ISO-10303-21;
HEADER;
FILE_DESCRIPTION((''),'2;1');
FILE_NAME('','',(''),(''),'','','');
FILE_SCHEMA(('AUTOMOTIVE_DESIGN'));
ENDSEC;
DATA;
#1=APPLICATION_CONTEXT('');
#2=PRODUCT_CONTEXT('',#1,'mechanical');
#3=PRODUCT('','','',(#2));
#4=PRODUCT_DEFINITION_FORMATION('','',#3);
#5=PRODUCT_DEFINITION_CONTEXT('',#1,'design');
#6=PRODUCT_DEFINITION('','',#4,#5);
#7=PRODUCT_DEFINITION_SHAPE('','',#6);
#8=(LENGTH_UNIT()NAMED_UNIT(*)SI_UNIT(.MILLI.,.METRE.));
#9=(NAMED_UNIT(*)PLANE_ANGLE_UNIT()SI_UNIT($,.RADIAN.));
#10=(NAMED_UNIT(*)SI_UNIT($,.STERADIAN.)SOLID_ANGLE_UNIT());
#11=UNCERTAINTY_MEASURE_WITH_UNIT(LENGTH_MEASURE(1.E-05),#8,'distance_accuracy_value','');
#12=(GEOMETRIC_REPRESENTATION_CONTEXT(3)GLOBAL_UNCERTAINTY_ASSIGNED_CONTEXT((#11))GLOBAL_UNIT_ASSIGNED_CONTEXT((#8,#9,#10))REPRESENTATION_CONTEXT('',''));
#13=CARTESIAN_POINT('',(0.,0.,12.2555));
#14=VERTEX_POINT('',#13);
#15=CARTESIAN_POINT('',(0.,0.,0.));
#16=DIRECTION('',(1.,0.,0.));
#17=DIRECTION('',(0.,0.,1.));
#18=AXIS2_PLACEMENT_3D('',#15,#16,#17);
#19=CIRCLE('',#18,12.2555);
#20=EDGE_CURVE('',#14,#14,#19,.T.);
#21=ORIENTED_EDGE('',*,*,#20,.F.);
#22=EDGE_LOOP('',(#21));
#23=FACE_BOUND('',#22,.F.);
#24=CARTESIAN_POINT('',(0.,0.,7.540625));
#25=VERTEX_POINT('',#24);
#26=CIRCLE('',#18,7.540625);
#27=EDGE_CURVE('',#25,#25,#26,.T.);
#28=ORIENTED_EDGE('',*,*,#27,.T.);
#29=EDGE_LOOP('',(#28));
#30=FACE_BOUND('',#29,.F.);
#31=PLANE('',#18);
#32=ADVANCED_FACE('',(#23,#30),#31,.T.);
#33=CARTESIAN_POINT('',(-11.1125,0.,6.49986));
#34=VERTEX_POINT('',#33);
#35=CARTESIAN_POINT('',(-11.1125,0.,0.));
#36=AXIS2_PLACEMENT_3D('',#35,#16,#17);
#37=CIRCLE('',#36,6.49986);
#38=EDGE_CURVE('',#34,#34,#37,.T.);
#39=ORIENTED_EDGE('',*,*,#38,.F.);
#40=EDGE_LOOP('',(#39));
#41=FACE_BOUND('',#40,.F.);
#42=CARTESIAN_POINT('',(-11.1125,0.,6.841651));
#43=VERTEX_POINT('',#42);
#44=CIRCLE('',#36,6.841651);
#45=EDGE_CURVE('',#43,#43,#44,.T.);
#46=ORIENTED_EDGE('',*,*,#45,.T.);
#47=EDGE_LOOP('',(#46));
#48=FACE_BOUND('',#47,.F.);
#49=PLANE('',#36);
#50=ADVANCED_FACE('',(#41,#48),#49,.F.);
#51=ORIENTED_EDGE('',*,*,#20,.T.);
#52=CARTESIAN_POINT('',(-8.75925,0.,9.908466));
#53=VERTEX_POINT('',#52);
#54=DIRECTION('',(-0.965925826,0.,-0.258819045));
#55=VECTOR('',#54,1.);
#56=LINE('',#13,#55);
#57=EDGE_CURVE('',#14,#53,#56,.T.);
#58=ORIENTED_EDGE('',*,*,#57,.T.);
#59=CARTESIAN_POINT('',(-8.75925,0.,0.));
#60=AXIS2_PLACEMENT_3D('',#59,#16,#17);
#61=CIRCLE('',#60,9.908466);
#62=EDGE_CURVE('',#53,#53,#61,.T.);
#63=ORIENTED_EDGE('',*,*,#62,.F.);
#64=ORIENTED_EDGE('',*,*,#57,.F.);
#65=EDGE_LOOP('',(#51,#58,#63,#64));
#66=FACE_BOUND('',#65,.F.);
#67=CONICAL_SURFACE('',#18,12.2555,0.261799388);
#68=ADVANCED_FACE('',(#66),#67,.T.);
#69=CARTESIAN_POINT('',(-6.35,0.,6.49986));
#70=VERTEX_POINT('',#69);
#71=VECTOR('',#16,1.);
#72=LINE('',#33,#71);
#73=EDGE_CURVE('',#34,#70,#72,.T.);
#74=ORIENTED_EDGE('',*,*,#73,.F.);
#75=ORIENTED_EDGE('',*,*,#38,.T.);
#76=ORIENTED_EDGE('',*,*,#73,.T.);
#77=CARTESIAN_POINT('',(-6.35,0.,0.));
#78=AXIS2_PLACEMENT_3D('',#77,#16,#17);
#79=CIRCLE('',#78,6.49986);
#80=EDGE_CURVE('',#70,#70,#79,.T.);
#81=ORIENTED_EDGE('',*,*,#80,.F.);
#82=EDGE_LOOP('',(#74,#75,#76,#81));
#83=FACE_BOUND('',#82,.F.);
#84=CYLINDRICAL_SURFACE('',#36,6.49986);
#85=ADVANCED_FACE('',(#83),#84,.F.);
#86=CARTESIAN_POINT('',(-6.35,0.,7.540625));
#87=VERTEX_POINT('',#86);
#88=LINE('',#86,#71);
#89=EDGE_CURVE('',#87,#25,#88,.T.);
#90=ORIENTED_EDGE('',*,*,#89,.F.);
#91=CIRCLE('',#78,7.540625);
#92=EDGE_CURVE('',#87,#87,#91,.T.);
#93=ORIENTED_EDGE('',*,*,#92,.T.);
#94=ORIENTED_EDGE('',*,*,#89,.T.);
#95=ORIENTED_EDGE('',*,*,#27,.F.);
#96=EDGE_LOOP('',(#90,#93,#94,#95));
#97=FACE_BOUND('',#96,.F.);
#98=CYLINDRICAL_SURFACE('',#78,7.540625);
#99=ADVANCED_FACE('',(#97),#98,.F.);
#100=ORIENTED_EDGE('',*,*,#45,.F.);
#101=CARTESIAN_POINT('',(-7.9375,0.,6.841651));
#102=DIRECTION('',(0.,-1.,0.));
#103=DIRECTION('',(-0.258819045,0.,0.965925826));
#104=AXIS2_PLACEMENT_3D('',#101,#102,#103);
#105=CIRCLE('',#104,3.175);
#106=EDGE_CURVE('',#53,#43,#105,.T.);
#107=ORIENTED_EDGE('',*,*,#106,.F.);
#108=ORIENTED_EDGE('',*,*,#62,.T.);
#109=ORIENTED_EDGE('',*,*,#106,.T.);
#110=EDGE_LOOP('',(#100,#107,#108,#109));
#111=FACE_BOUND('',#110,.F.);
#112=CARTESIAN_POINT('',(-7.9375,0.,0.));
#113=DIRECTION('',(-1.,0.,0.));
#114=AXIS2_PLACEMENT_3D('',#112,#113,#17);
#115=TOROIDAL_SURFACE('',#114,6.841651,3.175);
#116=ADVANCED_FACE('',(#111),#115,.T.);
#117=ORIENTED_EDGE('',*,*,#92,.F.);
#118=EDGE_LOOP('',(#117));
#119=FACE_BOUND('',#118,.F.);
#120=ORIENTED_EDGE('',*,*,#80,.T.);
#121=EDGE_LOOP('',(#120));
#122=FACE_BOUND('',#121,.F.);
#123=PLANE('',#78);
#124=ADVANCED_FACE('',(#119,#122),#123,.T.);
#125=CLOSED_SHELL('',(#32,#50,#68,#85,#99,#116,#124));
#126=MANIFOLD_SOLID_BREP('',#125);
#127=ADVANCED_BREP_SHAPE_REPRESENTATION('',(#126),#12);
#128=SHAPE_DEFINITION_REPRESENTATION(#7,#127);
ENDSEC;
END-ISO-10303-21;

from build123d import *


# Not quite as in the source:
# - a feature names something its author has since deleted; it is built from what else it names


with BuildPart() as f1:
    # F0 (on Front) → F1 (revolve)
    with BuildSketch(Plane.XZ):
        with BuildLine():
            Line((0, 7.540625), (0, 12.2555))
            Line((0, 12.2555), (-8.7592504682, 9.9084659107))
            ThreePointArc((-8.7592504682, 9.9084659107), (-10.4563968554, 8.7744689494), (-11.1125, 6.8416514123))
            Line((-11.1125, 6.8416514123), (-11.1125, 6.49986))
            Line((-11.1125, 6.49986), (-6.35, 6.49986))
            Line((-6.35, 6.49986), (-6.35, 7.540625))
            Line((-6.35, 7.540625), (0, 7.540625))
        make_face()
    revolve(axis=Axis((5.2561350167, 0, 0), (1, 0, 0)))


solid = f1.part
